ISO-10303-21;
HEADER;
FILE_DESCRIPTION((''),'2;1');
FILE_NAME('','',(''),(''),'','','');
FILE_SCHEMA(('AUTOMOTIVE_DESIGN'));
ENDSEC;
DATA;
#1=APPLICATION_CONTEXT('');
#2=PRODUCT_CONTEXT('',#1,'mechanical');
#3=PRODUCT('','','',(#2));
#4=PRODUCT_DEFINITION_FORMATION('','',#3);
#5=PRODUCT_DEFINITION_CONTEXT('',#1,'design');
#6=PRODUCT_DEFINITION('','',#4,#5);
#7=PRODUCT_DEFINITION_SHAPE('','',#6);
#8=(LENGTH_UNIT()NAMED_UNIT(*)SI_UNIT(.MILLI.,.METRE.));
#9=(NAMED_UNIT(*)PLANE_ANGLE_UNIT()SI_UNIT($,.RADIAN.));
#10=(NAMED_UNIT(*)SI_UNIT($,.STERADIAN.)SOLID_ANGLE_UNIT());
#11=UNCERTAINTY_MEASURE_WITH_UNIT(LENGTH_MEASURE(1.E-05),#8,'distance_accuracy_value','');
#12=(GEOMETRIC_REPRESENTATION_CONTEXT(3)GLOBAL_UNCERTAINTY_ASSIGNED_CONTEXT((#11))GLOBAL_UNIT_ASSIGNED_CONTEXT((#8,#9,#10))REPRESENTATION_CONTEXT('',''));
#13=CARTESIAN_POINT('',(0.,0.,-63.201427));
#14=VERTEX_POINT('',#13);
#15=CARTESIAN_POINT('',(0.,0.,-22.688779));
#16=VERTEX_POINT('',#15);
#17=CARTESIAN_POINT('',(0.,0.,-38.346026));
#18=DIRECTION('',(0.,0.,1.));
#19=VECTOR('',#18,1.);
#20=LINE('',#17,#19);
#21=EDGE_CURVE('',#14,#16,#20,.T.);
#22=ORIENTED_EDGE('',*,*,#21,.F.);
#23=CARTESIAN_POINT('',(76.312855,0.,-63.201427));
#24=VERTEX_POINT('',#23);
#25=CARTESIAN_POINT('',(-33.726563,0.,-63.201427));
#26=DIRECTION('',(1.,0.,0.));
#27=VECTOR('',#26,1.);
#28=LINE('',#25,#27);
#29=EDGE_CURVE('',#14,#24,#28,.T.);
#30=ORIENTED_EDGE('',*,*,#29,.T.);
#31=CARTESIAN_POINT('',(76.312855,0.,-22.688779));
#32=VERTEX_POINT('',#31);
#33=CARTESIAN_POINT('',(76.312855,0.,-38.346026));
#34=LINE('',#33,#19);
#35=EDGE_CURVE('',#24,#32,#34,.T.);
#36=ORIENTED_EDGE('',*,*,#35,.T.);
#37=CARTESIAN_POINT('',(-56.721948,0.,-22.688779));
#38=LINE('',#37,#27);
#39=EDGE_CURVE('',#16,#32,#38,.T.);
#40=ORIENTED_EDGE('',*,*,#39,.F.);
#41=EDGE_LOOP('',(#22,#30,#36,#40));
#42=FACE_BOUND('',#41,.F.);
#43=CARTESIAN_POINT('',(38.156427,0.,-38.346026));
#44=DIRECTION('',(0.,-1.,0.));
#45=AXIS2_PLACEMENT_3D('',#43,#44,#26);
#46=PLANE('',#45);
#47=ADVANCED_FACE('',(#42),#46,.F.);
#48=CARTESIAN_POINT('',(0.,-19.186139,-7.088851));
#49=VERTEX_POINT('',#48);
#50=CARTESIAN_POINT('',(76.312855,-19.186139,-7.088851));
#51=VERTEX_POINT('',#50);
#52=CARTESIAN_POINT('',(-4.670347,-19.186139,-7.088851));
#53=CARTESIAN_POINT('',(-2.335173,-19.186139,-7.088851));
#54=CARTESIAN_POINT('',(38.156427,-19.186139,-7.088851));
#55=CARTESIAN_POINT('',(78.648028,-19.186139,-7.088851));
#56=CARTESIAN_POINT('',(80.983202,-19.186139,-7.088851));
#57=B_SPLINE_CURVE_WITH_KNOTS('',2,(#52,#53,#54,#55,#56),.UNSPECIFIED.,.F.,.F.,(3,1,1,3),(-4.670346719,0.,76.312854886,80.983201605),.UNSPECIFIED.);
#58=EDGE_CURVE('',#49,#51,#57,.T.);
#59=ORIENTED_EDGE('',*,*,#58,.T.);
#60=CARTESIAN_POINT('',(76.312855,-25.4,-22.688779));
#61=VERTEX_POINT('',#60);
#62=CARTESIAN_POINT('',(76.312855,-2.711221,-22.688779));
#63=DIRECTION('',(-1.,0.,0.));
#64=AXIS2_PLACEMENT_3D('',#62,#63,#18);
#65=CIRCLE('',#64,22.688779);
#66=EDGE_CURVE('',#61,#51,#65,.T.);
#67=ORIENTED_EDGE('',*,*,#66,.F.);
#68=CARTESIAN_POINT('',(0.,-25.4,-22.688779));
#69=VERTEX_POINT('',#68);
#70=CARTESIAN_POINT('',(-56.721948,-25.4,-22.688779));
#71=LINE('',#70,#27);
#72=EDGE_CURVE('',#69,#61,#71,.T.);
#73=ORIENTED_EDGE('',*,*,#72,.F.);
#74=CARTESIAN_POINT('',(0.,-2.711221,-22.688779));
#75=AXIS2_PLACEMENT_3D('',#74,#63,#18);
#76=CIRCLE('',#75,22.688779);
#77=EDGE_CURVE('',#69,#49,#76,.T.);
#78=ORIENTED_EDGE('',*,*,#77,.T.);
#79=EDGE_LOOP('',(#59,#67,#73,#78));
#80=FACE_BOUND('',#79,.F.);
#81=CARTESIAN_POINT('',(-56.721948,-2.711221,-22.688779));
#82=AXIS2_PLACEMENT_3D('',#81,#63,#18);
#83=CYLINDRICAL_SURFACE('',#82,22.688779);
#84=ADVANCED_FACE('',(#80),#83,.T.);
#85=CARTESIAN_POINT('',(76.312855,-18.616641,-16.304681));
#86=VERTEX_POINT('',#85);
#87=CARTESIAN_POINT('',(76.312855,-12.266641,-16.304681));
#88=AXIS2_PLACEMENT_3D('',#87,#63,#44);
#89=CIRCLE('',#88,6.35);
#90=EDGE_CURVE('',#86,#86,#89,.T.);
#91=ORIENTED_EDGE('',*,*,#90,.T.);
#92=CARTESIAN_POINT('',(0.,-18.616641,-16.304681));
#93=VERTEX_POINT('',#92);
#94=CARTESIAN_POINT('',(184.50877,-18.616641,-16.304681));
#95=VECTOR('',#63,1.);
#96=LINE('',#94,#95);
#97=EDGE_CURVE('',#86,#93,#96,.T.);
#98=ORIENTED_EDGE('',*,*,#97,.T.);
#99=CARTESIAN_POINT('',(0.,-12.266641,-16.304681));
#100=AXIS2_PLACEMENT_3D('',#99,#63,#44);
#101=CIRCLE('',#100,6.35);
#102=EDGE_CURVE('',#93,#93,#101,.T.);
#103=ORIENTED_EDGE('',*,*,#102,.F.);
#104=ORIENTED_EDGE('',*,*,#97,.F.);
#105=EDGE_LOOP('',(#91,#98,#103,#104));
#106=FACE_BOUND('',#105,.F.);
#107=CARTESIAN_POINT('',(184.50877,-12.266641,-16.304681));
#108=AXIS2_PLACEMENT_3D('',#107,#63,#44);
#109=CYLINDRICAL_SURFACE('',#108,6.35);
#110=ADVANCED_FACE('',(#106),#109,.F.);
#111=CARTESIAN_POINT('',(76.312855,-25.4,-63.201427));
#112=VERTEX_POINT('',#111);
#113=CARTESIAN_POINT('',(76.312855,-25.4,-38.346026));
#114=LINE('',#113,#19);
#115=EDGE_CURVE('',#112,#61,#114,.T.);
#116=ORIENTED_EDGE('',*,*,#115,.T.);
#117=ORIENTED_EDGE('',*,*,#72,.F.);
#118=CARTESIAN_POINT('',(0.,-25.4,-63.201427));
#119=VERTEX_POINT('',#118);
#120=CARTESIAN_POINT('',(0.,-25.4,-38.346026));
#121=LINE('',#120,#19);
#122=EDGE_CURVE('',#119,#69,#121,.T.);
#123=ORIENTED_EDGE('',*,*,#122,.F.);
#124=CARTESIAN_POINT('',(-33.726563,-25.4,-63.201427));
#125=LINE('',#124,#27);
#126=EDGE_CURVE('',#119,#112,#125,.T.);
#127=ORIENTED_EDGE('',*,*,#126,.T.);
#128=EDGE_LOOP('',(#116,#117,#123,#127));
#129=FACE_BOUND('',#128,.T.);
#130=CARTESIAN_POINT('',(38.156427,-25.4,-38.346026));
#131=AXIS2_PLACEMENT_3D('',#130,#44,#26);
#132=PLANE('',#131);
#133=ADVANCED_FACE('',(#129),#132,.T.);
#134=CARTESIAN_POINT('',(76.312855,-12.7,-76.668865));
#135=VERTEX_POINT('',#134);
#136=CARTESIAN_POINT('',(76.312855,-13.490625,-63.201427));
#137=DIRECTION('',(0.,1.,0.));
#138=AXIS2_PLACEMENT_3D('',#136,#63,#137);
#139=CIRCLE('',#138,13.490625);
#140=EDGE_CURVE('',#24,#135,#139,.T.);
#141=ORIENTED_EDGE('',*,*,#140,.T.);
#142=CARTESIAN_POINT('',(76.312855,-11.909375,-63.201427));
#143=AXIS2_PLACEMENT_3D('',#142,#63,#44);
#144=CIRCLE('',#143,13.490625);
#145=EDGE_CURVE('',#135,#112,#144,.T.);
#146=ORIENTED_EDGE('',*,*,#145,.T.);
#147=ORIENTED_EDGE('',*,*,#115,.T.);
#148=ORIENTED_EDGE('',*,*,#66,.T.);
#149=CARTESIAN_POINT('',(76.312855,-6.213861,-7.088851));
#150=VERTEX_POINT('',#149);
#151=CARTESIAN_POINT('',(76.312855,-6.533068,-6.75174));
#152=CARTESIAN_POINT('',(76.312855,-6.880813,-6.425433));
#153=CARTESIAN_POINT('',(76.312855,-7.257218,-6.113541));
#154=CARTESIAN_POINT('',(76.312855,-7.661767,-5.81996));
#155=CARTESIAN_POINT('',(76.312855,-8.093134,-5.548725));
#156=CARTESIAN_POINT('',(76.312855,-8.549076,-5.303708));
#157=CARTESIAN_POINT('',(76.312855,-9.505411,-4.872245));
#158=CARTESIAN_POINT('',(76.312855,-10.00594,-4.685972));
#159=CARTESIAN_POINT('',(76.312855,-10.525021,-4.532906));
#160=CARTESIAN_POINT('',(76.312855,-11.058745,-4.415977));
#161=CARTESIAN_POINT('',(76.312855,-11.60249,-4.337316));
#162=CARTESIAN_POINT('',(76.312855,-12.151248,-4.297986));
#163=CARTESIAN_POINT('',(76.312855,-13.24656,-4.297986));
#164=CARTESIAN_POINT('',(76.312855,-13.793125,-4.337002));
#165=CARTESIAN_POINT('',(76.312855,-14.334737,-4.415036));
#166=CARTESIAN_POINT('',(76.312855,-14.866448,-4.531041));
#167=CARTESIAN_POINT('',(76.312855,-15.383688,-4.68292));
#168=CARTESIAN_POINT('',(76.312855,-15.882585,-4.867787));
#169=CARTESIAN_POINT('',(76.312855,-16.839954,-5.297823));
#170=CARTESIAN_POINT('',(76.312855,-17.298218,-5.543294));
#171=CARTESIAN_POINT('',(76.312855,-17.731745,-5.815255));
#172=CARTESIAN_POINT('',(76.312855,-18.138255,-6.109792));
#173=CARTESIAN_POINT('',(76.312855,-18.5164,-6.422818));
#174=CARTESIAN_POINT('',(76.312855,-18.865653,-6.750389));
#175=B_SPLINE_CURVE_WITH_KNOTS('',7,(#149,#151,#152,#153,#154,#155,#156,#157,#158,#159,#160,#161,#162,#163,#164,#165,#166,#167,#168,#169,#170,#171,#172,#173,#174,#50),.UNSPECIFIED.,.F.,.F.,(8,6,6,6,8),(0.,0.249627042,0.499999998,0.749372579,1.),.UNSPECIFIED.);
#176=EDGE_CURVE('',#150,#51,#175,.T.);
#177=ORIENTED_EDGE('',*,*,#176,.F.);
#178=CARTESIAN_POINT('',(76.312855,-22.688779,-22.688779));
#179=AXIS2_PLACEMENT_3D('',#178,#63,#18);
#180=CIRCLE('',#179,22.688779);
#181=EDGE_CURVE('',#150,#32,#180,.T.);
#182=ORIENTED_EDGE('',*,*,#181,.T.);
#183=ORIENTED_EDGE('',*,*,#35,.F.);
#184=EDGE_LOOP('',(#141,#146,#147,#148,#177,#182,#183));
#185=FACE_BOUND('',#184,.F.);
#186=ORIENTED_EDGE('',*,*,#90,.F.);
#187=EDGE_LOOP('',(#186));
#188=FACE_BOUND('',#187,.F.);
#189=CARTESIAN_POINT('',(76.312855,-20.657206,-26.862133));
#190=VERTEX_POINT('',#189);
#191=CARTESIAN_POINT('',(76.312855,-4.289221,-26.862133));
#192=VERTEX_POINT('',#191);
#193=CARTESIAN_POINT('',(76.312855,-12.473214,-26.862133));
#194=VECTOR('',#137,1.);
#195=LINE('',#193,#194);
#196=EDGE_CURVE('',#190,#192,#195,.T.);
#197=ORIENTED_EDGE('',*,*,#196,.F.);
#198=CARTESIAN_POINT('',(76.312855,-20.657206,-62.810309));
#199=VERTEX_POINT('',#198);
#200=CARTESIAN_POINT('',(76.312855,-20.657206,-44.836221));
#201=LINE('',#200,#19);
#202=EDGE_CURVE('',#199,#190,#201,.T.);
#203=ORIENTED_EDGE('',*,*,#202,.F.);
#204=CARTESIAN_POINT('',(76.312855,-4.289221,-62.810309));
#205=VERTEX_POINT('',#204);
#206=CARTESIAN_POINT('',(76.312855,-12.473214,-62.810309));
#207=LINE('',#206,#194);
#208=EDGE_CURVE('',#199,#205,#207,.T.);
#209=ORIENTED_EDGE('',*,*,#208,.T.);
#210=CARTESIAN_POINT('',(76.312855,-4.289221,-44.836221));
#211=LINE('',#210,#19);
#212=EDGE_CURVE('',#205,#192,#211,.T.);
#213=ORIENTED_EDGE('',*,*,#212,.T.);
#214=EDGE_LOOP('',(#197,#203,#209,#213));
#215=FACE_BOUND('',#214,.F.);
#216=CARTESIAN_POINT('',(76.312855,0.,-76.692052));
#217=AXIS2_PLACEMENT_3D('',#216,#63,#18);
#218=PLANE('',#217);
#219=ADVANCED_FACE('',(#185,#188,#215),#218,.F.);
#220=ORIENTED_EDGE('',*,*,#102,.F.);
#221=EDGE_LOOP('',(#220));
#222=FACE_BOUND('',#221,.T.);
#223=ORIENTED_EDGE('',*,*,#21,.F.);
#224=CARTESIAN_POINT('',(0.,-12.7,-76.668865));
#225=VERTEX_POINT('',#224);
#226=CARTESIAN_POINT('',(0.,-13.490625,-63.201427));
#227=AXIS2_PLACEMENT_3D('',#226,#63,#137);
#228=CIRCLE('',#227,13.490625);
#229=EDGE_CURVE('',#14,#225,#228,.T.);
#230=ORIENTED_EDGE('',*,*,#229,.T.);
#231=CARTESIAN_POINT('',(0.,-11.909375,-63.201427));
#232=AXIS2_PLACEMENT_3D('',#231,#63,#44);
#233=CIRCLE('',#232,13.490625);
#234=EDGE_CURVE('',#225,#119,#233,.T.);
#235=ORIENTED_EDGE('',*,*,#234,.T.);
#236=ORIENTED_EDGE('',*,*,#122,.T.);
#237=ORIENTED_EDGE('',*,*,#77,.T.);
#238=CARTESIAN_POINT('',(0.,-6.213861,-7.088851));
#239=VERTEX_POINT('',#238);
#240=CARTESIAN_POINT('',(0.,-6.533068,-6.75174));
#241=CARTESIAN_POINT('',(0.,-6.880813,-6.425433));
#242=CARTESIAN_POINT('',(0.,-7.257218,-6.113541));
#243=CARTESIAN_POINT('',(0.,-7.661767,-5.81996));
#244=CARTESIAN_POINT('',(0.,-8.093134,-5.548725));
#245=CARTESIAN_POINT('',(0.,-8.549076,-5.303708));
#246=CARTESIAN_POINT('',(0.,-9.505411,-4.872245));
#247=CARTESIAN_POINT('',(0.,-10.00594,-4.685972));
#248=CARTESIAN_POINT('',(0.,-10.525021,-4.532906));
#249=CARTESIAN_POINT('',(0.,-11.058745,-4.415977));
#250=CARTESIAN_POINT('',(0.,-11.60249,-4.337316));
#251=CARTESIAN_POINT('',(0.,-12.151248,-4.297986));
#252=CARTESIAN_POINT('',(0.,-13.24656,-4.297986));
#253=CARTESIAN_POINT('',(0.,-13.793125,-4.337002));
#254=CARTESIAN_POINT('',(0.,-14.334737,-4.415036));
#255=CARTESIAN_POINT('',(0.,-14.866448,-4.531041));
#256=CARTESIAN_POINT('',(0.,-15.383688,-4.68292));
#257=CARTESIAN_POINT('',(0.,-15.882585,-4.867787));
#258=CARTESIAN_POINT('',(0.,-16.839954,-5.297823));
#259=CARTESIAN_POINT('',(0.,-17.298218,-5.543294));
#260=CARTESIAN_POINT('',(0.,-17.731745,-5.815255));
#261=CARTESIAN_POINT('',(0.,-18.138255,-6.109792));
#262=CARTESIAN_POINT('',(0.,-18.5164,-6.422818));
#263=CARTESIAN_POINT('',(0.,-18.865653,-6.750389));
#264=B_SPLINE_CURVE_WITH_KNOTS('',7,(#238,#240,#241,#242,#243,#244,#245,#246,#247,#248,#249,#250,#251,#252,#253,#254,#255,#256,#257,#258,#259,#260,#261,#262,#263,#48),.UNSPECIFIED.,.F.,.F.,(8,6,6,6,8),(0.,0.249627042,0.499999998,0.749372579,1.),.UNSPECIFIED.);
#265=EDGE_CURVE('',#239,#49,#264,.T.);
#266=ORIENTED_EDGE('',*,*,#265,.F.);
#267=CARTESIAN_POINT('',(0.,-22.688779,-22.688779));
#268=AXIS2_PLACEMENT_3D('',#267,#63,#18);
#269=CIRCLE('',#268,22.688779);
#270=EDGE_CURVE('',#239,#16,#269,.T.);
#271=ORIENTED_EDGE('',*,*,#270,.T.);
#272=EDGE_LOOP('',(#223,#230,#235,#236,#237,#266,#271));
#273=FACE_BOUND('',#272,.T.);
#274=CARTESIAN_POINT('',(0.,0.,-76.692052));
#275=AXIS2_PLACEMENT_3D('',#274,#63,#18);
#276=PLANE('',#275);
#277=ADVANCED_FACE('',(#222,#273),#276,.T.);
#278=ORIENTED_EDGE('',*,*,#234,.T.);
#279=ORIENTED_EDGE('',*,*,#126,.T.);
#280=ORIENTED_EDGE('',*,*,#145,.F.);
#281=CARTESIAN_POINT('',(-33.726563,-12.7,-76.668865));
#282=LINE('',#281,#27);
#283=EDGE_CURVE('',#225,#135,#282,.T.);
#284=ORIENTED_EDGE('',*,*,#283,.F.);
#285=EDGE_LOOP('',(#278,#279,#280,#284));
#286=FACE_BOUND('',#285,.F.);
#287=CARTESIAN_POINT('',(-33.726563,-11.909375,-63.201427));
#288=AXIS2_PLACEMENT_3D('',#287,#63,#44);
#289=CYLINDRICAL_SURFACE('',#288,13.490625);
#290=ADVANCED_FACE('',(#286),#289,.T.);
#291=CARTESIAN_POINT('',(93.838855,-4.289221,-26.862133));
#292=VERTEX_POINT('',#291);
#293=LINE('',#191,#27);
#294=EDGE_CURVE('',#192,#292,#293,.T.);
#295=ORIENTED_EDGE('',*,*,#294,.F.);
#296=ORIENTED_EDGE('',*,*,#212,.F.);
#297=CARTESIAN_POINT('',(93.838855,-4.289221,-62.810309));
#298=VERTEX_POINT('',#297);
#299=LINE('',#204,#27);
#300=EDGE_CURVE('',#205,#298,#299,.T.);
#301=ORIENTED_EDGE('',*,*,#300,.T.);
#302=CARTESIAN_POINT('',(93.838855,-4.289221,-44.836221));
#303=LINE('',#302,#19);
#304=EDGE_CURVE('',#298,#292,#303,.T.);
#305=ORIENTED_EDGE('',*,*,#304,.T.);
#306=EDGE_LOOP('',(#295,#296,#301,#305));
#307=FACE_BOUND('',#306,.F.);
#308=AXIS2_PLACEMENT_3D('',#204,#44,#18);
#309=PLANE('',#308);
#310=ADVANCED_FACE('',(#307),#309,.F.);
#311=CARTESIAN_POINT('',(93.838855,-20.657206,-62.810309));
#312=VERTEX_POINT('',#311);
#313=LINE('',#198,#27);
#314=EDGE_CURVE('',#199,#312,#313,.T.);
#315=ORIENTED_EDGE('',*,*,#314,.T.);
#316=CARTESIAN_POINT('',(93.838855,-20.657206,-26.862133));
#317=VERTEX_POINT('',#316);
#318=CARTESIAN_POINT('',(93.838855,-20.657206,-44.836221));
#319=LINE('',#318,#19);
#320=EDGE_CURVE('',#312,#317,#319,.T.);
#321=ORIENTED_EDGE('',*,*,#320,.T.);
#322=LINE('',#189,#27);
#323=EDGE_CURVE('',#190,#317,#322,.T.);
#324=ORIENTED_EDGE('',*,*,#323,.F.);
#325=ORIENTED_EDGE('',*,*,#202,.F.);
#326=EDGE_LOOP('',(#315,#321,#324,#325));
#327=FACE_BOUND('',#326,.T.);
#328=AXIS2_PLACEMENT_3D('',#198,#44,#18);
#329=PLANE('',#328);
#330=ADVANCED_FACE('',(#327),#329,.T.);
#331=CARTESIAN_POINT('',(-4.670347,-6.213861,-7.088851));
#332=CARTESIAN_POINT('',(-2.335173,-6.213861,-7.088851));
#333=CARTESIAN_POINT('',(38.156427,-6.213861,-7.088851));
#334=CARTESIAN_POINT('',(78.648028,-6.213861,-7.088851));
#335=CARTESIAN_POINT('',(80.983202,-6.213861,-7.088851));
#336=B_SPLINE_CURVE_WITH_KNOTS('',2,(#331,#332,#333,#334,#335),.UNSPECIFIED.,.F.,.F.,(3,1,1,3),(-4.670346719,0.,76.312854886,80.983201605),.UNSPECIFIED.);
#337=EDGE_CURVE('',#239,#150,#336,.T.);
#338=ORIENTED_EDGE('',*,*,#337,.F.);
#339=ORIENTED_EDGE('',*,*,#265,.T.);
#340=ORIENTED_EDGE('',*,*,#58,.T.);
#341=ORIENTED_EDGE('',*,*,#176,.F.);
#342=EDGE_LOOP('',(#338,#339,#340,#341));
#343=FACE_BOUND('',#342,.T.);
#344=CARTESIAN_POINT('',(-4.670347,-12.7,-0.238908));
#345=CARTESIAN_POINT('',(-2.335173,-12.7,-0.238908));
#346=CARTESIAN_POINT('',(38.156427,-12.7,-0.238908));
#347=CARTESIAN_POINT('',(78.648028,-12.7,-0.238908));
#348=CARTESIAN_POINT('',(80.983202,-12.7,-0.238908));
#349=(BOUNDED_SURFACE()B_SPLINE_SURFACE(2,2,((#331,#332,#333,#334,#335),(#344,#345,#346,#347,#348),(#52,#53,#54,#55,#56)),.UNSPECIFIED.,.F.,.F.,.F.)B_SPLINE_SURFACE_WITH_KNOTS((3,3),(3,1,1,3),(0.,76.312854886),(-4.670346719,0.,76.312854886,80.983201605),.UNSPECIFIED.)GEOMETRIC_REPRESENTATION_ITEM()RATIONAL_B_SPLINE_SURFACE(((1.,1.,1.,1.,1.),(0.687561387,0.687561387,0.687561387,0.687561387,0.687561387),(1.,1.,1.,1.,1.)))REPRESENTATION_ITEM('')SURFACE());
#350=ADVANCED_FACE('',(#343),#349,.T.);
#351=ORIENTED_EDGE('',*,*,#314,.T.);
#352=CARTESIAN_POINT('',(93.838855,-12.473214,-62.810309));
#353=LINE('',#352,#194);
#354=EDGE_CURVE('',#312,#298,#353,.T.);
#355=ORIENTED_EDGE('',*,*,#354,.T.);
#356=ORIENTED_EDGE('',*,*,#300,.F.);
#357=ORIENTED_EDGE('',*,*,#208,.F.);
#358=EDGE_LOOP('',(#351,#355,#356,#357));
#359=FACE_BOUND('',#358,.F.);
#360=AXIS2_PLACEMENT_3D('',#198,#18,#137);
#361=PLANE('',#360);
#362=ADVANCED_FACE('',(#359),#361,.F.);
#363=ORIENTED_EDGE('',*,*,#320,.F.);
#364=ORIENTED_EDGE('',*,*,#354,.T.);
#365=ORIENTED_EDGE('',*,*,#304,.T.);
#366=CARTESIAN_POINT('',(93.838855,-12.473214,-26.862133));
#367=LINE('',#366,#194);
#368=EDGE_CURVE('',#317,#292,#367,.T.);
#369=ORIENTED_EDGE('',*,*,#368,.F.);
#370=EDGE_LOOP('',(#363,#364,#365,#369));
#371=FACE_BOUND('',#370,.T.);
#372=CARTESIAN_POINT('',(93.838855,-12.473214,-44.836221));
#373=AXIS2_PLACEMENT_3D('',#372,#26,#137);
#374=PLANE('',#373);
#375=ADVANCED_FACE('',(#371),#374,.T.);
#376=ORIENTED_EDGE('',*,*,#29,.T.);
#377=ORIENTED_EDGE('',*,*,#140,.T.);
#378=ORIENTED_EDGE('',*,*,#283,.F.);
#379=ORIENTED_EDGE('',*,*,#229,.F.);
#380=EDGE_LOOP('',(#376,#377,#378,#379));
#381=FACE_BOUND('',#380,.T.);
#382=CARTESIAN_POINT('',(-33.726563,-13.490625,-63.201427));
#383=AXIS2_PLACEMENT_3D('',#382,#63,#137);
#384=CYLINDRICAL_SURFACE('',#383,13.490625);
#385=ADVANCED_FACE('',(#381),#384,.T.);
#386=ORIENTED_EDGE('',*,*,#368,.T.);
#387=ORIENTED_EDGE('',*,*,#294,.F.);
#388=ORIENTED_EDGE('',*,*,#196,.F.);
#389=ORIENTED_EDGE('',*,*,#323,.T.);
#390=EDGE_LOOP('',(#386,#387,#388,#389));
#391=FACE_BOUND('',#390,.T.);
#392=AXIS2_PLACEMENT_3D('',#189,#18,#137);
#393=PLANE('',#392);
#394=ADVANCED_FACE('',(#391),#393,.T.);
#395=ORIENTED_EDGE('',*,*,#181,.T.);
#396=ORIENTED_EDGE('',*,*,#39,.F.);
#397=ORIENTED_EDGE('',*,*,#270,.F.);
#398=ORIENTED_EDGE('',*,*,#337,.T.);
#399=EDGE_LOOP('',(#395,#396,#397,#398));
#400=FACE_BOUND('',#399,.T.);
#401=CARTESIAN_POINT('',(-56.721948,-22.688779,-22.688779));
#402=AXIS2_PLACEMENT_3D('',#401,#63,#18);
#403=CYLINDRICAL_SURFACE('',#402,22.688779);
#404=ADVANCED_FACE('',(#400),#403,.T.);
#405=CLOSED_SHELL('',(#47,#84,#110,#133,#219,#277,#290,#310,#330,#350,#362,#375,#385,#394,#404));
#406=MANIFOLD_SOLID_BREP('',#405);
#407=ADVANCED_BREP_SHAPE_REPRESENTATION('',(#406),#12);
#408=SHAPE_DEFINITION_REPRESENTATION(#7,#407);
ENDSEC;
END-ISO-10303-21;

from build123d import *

# Parameters (mm, degrees)
F0_W        = 76.3128548861
F0_H        = 76.6920521855
F1_DEPTH    = 25.4
F2_T1_DEPTH = 189.756750182
F3_T1_DEPTH = 143.7659818188
F4_R        = 8.9325225018
F6_D        = 12.7
F7_W        = 16.36798447
F7_H        = 35.9481759369
F8_DEPTH    = 17.526


# Not quite as in the source:
# - a fillet or chamfer that OpenCascade refuses, or shapes differently, is made with other operations: its cross-section is extruded or revolved along the edge and cut away or added


with BuildPart() as f1:
    # F0 (on Front) → F1 (new body)
    with BuildSketch(Plane.XZ):
        with Locations((38.156427443, -38.3460260928)):
            Rectangle(F0_W, F0_H)
    extrude(amount=F1_DEPTH)

    # F2: fillet of radius 22.6887790592 on 2 edges, made by hand

    # F2_s2 → F2_t1 (cut)
    with BuildSketch(Plane.YZ.offset(-56.721947648)):
        with BuildLine():
            ThreePointArc((-2.7112209408, 0), (-18.7546104704, -6.6453895296), (-25.4, -22.6887790592))
            Line((-25.4, -22.6887790592), (-25.4, 0))
            Line((-25.4, 0), (-2.7112209408, 0))
        make_face()
        with BuildLine():
            ThreePointArc((-22.6887790592, 0), (-6.6453895296, -6.6453895296), (0, -22.6887790592))
            Line((0, -22.6887790592), (0, 0))
            Line((0, 0), (-22.6887790592, 0))
        make_face()
    extrude(amount=F2_T1_DEPTH, mode=Mode.SUBTRACT)

    # F3: fillet of radius 13.4906253865 on 2 edges, made by hand

    # F3_s2 → F3_t1 (cut)
    with BuildSketch(Plane.YZ.offset(-33.7265634664)):
        with BuildLine():
            ThreePointArc((-25.4, -63.201426799), (-21.4486873067, -72.7407394923), (-11.9093746135, -76.6920521855))
            Line((-11.9093746135, -76.6920521855), (-25.4, -76.6920521855))
            Line((-25.4, -76.6920521855), (-25.4, -63.201426799))
        make_face()
        with BuildLine():
            ThreePointArc((0, -63.201426799), (-3.9513126933, -72.7407394923), (-13.4906253865, -76.6920521855))
            Line((-13.4906253865, -76.6920521855), (0, -76.6920521855))
            Line((0, -76.6920521855), (0, -63.201426799))
        make_face()
    extrude(amount=F3_T1_DEPTH, mode=Mode.SUBTRACT)

    # F4
    f4_edges = [f1.edges().sort_by_distance(p)[0] for p in [
        (38.156427, -12.7, -2.317108),
    ]]
    fillet(f4_edges, radius=F4_R)

    # F6 (through all)
    with Locations(Plane.YZ.offset(76.3128548861)):
        with Locations((-12.2666405514, -16.3046810776)):
            Hole(F6_D / 2)

    # F7 (on face) → F8 (join)
    with BuildSketch(Plane.YZ.offset(76.3128548861)):
        with Locations((-12.4732137192, -44.8362212628)):
            Rectangle(F7_W, F7_H)
    extrude(amount=F8_DEPTH)


solid = f1.part
